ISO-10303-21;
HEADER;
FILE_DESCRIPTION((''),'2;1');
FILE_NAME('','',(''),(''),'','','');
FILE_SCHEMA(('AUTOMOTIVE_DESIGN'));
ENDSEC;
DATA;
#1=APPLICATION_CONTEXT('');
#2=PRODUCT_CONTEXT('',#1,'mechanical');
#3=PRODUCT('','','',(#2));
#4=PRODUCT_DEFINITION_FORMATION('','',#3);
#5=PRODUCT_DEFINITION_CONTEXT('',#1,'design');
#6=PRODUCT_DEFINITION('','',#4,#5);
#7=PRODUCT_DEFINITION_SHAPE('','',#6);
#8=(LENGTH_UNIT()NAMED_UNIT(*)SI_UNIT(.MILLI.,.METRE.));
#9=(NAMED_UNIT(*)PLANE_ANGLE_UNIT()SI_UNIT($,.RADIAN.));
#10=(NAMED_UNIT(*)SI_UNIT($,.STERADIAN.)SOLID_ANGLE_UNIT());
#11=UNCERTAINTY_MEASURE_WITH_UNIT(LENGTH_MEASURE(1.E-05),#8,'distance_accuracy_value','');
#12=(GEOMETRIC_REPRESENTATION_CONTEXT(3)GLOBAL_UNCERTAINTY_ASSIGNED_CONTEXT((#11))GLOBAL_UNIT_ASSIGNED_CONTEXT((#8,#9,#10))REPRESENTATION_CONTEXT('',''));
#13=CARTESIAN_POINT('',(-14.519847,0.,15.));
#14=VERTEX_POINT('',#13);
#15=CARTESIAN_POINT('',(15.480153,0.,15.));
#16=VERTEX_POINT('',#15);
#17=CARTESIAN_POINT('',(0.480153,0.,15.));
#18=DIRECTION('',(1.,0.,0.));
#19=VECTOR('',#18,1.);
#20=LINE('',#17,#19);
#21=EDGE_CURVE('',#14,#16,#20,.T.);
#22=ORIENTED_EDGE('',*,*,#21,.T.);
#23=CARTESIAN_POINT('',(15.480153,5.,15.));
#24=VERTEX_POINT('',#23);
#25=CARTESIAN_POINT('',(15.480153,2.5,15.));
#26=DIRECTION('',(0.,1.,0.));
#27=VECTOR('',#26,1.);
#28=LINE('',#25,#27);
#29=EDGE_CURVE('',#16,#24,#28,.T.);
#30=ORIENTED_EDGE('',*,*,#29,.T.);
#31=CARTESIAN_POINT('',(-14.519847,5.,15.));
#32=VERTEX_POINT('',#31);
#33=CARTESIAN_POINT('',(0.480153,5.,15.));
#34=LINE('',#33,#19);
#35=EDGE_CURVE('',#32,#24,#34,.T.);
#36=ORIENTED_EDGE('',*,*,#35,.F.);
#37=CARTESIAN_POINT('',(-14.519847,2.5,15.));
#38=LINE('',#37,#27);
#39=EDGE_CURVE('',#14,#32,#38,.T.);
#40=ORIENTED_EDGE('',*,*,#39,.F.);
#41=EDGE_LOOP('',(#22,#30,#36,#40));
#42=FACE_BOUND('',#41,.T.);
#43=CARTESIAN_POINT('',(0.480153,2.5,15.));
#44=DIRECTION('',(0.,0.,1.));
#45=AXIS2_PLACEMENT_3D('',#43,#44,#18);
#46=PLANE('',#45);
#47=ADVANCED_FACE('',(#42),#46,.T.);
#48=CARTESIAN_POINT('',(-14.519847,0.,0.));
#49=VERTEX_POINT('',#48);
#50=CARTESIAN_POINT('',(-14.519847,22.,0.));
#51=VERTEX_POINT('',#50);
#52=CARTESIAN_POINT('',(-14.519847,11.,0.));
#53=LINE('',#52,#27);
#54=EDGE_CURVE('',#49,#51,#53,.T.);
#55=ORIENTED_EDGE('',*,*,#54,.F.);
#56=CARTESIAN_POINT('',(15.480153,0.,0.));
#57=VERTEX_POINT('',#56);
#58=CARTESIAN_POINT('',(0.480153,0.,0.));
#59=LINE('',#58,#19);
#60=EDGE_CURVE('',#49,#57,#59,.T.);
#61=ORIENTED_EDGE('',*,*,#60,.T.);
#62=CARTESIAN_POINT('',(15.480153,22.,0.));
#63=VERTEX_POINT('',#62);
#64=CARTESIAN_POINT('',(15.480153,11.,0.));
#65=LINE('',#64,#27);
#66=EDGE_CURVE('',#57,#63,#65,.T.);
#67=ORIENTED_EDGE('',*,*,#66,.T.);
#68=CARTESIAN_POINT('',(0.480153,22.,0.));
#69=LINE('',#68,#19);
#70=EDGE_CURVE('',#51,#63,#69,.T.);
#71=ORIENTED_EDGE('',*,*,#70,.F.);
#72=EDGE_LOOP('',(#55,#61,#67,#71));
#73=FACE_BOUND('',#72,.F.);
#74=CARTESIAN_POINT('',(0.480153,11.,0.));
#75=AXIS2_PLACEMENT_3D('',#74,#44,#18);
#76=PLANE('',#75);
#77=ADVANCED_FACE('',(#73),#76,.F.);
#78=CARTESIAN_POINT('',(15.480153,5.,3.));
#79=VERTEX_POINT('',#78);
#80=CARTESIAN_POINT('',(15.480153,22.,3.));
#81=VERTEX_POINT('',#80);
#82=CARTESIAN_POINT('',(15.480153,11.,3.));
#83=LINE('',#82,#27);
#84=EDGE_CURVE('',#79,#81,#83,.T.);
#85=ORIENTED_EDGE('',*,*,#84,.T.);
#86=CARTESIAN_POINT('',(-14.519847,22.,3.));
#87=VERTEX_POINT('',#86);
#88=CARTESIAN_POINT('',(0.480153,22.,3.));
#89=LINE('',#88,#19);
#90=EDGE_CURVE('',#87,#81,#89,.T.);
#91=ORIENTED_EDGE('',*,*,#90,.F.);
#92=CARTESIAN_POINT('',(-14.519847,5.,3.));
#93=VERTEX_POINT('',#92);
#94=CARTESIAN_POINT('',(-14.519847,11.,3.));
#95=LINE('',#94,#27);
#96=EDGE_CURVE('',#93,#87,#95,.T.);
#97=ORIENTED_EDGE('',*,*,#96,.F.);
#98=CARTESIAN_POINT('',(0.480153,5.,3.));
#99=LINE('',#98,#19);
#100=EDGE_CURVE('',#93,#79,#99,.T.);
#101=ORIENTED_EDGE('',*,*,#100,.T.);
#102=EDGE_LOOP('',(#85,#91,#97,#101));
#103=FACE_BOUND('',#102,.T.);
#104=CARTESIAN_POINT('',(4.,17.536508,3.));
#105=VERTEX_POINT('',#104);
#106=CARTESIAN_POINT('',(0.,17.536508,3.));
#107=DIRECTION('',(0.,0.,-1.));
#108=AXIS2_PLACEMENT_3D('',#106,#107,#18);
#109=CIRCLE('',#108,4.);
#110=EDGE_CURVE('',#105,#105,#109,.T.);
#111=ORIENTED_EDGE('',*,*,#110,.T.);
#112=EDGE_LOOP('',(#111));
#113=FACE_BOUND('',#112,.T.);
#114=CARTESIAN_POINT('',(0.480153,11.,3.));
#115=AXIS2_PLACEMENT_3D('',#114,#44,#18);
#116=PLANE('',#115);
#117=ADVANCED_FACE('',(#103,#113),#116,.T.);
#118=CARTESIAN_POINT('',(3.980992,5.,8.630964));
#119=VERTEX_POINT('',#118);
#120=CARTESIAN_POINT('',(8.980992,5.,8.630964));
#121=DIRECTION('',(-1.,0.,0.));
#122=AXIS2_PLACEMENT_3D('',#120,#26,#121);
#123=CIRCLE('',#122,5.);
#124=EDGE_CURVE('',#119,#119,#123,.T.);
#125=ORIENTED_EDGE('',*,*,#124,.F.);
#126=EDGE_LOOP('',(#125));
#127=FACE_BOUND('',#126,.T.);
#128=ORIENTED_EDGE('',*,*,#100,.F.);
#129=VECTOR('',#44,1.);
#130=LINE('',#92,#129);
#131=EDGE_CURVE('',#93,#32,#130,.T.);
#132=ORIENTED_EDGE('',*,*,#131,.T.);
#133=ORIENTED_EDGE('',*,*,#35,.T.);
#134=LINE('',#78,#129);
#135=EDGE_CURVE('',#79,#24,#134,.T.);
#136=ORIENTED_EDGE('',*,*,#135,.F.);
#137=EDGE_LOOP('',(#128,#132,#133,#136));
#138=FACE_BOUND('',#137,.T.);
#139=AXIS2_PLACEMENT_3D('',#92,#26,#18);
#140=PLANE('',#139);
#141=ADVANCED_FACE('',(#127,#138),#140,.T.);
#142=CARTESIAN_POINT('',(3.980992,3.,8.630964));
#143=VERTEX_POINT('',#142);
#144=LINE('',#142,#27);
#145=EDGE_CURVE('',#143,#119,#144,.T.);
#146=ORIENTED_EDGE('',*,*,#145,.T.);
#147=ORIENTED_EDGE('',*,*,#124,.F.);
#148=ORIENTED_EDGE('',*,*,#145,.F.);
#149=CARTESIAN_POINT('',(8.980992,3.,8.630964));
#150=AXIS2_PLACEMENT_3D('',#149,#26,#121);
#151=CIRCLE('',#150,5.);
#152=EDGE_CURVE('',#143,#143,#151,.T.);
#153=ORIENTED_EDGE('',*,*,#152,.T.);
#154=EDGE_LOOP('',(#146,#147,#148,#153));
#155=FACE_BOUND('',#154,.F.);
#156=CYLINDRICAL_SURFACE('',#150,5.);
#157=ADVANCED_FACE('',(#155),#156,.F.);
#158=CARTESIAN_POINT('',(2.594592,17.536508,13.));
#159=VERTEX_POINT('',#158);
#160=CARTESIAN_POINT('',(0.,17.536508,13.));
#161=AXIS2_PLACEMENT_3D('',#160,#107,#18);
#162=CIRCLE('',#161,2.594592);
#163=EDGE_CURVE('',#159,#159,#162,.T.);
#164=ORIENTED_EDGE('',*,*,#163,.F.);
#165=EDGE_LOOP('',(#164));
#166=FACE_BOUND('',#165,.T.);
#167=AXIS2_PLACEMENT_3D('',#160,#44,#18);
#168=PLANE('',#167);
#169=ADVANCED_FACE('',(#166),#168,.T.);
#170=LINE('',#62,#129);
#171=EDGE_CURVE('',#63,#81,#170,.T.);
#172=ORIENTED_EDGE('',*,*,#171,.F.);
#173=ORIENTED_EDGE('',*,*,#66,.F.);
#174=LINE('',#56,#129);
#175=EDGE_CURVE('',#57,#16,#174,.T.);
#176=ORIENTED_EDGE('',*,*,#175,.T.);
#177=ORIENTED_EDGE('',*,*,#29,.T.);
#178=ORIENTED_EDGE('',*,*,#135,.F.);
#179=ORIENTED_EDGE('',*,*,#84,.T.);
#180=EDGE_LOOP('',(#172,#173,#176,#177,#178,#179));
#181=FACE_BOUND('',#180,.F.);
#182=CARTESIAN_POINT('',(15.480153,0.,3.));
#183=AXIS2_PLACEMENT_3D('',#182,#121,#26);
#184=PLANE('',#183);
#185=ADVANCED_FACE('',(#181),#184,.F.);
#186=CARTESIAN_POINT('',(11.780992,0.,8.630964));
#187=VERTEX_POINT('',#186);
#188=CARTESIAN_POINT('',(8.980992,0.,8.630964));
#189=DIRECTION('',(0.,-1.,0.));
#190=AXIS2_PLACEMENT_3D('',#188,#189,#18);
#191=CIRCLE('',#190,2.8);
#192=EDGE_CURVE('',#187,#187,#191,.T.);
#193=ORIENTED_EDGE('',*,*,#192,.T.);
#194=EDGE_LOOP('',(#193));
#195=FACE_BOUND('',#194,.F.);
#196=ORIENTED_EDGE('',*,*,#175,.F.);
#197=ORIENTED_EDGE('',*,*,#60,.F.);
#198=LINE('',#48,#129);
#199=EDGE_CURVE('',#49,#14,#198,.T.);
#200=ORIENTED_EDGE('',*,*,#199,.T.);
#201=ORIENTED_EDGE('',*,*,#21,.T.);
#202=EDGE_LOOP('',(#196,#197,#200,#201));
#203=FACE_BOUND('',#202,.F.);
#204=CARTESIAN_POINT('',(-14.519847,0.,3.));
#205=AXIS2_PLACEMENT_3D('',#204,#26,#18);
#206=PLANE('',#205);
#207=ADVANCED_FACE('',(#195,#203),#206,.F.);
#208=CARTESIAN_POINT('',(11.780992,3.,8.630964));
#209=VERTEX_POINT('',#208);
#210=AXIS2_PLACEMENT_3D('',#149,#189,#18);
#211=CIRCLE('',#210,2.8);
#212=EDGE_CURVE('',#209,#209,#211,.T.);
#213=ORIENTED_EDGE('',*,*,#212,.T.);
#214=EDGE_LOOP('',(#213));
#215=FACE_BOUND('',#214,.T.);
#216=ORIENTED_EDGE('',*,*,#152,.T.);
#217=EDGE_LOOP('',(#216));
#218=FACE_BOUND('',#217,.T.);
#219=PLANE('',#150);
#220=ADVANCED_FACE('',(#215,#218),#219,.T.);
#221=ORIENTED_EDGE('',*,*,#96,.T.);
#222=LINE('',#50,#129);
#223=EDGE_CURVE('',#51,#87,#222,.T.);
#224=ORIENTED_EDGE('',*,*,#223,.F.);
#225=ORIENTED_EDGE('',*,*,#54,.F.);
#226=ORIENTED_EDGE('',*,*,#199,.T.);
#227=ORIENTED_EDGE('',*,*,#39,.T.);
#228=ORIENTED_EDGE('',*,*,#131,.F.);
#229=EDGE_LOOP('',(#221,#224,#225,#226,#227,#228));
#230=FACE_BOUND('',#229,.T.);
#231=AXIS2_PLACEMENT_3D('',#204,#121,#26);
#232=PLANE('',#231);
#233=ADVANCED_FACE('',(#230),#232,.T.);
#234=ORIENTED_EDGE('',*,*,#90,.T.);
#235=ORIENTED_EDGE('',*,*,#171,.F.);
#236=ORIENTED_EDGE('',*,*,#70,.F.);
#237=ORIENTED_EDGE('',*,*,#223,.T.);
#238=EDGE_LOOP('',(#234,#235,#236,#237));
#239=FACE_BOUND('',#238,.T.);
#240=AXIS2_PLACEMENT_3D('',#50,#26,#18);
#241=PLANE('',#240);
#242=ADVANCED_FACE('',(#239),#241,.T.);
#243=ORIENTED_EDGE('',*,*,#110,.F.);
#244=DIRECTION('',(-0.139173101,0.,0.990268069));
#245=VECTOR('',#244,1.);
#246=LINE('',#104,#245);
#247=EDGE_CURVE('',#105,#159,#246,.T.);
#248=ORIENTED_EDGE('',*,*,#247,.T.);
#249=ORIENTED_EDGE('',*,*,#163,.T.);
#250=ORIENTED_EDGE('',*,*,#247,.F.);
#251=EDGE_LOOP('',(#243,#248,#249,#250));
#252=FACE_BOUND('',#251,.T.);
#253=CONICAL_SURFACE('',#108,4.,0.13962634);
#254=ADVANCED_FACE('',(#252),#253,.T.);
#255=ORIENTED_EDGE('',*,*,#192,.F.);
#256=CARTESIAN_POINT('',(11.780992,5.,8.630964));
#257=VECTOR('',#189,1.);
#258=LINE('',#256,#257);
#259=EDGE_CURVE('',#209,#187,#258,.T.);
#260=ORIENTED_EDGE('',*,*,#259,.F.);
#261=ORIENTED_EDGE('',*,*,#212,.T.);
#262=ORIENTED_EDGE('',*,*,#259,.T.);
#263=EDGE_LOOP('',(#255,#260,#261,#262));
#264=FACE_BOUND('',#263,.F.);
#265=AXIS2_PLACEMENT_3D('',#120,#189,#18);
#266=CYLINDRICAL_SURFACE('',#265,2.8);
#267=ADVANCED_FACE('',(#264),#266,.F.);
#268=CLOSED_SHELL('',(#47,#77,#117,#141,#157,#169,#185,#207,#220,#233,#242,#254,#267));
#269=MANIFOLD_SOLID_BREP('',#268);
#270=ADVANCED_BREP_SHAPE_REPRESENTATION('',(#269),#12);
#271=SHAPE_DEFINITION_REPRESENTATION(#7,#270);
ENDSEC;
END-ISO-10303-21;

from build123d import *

# Parameters (mm, degrees)
F0_W           = 30
F0_H           = 22
F1_DEPTH       = 3
F2_W           = 30
F2_H           = 5
F2_R           = 4
F3_DEPTH       = 10
F3_TAPER       = 8
F4_DEPTH       = 12
F6_D           = 5.6
F6_DEPTH       = 15
F6_CBORE_D     = 10
F6_CBORE_DEPTH = 2
F6_TIP         = 1.6824097333


with BuildPart() as f1:
    # F0 (on Top) → F1 (new body)
    with BuildSketch(Plane.XY):
        with Locations((0.4801530018, 11)):
            Rectangle(F0_W, F0_H)
    extrude(amount=F1_DEPTH)

    # F2 (on face) → F3 (join)
    with BuildSketch(Plane.XY.offset(3)):
        with Locations((0.4801530018, 2.5)):
            Rectangle(F2_W, F2_H)
        with Locations((0, 17.5365079194)):
            Circle(F2_R)
    extrude(amount=F3_DEPTH, taper=F3_TAPER)

    # F2 (on face) → F4 (join)
    with BuildSketch(Plane.XY.offset(3)):
        with Locations((0.4801530018, 2.5)):
            Rectangle(F2_W, F2_H)
    extrude(amount=F4_DEPTH)

    # F6
    with Locations(Plane(origin=(0, 5, 0), x_dir=(-1, 0, 0), z_dir=(0, 1, 0))):
        with Locations((-8.9809922501, 8.6309639737)):
            CounterBoreHole(F6_D / 2, F6_CBORE_D / 2, F6_CBORE_DEPTH, depth=F6_DEPTH)
            with Locations((0, 0, -(F6_DEPTH + F6_TIP / 2))):  # 118° drill point
                Cone(0, F6_D / 2, F6_TIP, mode=Mode.SUBTRACT)


solid = f1.part
